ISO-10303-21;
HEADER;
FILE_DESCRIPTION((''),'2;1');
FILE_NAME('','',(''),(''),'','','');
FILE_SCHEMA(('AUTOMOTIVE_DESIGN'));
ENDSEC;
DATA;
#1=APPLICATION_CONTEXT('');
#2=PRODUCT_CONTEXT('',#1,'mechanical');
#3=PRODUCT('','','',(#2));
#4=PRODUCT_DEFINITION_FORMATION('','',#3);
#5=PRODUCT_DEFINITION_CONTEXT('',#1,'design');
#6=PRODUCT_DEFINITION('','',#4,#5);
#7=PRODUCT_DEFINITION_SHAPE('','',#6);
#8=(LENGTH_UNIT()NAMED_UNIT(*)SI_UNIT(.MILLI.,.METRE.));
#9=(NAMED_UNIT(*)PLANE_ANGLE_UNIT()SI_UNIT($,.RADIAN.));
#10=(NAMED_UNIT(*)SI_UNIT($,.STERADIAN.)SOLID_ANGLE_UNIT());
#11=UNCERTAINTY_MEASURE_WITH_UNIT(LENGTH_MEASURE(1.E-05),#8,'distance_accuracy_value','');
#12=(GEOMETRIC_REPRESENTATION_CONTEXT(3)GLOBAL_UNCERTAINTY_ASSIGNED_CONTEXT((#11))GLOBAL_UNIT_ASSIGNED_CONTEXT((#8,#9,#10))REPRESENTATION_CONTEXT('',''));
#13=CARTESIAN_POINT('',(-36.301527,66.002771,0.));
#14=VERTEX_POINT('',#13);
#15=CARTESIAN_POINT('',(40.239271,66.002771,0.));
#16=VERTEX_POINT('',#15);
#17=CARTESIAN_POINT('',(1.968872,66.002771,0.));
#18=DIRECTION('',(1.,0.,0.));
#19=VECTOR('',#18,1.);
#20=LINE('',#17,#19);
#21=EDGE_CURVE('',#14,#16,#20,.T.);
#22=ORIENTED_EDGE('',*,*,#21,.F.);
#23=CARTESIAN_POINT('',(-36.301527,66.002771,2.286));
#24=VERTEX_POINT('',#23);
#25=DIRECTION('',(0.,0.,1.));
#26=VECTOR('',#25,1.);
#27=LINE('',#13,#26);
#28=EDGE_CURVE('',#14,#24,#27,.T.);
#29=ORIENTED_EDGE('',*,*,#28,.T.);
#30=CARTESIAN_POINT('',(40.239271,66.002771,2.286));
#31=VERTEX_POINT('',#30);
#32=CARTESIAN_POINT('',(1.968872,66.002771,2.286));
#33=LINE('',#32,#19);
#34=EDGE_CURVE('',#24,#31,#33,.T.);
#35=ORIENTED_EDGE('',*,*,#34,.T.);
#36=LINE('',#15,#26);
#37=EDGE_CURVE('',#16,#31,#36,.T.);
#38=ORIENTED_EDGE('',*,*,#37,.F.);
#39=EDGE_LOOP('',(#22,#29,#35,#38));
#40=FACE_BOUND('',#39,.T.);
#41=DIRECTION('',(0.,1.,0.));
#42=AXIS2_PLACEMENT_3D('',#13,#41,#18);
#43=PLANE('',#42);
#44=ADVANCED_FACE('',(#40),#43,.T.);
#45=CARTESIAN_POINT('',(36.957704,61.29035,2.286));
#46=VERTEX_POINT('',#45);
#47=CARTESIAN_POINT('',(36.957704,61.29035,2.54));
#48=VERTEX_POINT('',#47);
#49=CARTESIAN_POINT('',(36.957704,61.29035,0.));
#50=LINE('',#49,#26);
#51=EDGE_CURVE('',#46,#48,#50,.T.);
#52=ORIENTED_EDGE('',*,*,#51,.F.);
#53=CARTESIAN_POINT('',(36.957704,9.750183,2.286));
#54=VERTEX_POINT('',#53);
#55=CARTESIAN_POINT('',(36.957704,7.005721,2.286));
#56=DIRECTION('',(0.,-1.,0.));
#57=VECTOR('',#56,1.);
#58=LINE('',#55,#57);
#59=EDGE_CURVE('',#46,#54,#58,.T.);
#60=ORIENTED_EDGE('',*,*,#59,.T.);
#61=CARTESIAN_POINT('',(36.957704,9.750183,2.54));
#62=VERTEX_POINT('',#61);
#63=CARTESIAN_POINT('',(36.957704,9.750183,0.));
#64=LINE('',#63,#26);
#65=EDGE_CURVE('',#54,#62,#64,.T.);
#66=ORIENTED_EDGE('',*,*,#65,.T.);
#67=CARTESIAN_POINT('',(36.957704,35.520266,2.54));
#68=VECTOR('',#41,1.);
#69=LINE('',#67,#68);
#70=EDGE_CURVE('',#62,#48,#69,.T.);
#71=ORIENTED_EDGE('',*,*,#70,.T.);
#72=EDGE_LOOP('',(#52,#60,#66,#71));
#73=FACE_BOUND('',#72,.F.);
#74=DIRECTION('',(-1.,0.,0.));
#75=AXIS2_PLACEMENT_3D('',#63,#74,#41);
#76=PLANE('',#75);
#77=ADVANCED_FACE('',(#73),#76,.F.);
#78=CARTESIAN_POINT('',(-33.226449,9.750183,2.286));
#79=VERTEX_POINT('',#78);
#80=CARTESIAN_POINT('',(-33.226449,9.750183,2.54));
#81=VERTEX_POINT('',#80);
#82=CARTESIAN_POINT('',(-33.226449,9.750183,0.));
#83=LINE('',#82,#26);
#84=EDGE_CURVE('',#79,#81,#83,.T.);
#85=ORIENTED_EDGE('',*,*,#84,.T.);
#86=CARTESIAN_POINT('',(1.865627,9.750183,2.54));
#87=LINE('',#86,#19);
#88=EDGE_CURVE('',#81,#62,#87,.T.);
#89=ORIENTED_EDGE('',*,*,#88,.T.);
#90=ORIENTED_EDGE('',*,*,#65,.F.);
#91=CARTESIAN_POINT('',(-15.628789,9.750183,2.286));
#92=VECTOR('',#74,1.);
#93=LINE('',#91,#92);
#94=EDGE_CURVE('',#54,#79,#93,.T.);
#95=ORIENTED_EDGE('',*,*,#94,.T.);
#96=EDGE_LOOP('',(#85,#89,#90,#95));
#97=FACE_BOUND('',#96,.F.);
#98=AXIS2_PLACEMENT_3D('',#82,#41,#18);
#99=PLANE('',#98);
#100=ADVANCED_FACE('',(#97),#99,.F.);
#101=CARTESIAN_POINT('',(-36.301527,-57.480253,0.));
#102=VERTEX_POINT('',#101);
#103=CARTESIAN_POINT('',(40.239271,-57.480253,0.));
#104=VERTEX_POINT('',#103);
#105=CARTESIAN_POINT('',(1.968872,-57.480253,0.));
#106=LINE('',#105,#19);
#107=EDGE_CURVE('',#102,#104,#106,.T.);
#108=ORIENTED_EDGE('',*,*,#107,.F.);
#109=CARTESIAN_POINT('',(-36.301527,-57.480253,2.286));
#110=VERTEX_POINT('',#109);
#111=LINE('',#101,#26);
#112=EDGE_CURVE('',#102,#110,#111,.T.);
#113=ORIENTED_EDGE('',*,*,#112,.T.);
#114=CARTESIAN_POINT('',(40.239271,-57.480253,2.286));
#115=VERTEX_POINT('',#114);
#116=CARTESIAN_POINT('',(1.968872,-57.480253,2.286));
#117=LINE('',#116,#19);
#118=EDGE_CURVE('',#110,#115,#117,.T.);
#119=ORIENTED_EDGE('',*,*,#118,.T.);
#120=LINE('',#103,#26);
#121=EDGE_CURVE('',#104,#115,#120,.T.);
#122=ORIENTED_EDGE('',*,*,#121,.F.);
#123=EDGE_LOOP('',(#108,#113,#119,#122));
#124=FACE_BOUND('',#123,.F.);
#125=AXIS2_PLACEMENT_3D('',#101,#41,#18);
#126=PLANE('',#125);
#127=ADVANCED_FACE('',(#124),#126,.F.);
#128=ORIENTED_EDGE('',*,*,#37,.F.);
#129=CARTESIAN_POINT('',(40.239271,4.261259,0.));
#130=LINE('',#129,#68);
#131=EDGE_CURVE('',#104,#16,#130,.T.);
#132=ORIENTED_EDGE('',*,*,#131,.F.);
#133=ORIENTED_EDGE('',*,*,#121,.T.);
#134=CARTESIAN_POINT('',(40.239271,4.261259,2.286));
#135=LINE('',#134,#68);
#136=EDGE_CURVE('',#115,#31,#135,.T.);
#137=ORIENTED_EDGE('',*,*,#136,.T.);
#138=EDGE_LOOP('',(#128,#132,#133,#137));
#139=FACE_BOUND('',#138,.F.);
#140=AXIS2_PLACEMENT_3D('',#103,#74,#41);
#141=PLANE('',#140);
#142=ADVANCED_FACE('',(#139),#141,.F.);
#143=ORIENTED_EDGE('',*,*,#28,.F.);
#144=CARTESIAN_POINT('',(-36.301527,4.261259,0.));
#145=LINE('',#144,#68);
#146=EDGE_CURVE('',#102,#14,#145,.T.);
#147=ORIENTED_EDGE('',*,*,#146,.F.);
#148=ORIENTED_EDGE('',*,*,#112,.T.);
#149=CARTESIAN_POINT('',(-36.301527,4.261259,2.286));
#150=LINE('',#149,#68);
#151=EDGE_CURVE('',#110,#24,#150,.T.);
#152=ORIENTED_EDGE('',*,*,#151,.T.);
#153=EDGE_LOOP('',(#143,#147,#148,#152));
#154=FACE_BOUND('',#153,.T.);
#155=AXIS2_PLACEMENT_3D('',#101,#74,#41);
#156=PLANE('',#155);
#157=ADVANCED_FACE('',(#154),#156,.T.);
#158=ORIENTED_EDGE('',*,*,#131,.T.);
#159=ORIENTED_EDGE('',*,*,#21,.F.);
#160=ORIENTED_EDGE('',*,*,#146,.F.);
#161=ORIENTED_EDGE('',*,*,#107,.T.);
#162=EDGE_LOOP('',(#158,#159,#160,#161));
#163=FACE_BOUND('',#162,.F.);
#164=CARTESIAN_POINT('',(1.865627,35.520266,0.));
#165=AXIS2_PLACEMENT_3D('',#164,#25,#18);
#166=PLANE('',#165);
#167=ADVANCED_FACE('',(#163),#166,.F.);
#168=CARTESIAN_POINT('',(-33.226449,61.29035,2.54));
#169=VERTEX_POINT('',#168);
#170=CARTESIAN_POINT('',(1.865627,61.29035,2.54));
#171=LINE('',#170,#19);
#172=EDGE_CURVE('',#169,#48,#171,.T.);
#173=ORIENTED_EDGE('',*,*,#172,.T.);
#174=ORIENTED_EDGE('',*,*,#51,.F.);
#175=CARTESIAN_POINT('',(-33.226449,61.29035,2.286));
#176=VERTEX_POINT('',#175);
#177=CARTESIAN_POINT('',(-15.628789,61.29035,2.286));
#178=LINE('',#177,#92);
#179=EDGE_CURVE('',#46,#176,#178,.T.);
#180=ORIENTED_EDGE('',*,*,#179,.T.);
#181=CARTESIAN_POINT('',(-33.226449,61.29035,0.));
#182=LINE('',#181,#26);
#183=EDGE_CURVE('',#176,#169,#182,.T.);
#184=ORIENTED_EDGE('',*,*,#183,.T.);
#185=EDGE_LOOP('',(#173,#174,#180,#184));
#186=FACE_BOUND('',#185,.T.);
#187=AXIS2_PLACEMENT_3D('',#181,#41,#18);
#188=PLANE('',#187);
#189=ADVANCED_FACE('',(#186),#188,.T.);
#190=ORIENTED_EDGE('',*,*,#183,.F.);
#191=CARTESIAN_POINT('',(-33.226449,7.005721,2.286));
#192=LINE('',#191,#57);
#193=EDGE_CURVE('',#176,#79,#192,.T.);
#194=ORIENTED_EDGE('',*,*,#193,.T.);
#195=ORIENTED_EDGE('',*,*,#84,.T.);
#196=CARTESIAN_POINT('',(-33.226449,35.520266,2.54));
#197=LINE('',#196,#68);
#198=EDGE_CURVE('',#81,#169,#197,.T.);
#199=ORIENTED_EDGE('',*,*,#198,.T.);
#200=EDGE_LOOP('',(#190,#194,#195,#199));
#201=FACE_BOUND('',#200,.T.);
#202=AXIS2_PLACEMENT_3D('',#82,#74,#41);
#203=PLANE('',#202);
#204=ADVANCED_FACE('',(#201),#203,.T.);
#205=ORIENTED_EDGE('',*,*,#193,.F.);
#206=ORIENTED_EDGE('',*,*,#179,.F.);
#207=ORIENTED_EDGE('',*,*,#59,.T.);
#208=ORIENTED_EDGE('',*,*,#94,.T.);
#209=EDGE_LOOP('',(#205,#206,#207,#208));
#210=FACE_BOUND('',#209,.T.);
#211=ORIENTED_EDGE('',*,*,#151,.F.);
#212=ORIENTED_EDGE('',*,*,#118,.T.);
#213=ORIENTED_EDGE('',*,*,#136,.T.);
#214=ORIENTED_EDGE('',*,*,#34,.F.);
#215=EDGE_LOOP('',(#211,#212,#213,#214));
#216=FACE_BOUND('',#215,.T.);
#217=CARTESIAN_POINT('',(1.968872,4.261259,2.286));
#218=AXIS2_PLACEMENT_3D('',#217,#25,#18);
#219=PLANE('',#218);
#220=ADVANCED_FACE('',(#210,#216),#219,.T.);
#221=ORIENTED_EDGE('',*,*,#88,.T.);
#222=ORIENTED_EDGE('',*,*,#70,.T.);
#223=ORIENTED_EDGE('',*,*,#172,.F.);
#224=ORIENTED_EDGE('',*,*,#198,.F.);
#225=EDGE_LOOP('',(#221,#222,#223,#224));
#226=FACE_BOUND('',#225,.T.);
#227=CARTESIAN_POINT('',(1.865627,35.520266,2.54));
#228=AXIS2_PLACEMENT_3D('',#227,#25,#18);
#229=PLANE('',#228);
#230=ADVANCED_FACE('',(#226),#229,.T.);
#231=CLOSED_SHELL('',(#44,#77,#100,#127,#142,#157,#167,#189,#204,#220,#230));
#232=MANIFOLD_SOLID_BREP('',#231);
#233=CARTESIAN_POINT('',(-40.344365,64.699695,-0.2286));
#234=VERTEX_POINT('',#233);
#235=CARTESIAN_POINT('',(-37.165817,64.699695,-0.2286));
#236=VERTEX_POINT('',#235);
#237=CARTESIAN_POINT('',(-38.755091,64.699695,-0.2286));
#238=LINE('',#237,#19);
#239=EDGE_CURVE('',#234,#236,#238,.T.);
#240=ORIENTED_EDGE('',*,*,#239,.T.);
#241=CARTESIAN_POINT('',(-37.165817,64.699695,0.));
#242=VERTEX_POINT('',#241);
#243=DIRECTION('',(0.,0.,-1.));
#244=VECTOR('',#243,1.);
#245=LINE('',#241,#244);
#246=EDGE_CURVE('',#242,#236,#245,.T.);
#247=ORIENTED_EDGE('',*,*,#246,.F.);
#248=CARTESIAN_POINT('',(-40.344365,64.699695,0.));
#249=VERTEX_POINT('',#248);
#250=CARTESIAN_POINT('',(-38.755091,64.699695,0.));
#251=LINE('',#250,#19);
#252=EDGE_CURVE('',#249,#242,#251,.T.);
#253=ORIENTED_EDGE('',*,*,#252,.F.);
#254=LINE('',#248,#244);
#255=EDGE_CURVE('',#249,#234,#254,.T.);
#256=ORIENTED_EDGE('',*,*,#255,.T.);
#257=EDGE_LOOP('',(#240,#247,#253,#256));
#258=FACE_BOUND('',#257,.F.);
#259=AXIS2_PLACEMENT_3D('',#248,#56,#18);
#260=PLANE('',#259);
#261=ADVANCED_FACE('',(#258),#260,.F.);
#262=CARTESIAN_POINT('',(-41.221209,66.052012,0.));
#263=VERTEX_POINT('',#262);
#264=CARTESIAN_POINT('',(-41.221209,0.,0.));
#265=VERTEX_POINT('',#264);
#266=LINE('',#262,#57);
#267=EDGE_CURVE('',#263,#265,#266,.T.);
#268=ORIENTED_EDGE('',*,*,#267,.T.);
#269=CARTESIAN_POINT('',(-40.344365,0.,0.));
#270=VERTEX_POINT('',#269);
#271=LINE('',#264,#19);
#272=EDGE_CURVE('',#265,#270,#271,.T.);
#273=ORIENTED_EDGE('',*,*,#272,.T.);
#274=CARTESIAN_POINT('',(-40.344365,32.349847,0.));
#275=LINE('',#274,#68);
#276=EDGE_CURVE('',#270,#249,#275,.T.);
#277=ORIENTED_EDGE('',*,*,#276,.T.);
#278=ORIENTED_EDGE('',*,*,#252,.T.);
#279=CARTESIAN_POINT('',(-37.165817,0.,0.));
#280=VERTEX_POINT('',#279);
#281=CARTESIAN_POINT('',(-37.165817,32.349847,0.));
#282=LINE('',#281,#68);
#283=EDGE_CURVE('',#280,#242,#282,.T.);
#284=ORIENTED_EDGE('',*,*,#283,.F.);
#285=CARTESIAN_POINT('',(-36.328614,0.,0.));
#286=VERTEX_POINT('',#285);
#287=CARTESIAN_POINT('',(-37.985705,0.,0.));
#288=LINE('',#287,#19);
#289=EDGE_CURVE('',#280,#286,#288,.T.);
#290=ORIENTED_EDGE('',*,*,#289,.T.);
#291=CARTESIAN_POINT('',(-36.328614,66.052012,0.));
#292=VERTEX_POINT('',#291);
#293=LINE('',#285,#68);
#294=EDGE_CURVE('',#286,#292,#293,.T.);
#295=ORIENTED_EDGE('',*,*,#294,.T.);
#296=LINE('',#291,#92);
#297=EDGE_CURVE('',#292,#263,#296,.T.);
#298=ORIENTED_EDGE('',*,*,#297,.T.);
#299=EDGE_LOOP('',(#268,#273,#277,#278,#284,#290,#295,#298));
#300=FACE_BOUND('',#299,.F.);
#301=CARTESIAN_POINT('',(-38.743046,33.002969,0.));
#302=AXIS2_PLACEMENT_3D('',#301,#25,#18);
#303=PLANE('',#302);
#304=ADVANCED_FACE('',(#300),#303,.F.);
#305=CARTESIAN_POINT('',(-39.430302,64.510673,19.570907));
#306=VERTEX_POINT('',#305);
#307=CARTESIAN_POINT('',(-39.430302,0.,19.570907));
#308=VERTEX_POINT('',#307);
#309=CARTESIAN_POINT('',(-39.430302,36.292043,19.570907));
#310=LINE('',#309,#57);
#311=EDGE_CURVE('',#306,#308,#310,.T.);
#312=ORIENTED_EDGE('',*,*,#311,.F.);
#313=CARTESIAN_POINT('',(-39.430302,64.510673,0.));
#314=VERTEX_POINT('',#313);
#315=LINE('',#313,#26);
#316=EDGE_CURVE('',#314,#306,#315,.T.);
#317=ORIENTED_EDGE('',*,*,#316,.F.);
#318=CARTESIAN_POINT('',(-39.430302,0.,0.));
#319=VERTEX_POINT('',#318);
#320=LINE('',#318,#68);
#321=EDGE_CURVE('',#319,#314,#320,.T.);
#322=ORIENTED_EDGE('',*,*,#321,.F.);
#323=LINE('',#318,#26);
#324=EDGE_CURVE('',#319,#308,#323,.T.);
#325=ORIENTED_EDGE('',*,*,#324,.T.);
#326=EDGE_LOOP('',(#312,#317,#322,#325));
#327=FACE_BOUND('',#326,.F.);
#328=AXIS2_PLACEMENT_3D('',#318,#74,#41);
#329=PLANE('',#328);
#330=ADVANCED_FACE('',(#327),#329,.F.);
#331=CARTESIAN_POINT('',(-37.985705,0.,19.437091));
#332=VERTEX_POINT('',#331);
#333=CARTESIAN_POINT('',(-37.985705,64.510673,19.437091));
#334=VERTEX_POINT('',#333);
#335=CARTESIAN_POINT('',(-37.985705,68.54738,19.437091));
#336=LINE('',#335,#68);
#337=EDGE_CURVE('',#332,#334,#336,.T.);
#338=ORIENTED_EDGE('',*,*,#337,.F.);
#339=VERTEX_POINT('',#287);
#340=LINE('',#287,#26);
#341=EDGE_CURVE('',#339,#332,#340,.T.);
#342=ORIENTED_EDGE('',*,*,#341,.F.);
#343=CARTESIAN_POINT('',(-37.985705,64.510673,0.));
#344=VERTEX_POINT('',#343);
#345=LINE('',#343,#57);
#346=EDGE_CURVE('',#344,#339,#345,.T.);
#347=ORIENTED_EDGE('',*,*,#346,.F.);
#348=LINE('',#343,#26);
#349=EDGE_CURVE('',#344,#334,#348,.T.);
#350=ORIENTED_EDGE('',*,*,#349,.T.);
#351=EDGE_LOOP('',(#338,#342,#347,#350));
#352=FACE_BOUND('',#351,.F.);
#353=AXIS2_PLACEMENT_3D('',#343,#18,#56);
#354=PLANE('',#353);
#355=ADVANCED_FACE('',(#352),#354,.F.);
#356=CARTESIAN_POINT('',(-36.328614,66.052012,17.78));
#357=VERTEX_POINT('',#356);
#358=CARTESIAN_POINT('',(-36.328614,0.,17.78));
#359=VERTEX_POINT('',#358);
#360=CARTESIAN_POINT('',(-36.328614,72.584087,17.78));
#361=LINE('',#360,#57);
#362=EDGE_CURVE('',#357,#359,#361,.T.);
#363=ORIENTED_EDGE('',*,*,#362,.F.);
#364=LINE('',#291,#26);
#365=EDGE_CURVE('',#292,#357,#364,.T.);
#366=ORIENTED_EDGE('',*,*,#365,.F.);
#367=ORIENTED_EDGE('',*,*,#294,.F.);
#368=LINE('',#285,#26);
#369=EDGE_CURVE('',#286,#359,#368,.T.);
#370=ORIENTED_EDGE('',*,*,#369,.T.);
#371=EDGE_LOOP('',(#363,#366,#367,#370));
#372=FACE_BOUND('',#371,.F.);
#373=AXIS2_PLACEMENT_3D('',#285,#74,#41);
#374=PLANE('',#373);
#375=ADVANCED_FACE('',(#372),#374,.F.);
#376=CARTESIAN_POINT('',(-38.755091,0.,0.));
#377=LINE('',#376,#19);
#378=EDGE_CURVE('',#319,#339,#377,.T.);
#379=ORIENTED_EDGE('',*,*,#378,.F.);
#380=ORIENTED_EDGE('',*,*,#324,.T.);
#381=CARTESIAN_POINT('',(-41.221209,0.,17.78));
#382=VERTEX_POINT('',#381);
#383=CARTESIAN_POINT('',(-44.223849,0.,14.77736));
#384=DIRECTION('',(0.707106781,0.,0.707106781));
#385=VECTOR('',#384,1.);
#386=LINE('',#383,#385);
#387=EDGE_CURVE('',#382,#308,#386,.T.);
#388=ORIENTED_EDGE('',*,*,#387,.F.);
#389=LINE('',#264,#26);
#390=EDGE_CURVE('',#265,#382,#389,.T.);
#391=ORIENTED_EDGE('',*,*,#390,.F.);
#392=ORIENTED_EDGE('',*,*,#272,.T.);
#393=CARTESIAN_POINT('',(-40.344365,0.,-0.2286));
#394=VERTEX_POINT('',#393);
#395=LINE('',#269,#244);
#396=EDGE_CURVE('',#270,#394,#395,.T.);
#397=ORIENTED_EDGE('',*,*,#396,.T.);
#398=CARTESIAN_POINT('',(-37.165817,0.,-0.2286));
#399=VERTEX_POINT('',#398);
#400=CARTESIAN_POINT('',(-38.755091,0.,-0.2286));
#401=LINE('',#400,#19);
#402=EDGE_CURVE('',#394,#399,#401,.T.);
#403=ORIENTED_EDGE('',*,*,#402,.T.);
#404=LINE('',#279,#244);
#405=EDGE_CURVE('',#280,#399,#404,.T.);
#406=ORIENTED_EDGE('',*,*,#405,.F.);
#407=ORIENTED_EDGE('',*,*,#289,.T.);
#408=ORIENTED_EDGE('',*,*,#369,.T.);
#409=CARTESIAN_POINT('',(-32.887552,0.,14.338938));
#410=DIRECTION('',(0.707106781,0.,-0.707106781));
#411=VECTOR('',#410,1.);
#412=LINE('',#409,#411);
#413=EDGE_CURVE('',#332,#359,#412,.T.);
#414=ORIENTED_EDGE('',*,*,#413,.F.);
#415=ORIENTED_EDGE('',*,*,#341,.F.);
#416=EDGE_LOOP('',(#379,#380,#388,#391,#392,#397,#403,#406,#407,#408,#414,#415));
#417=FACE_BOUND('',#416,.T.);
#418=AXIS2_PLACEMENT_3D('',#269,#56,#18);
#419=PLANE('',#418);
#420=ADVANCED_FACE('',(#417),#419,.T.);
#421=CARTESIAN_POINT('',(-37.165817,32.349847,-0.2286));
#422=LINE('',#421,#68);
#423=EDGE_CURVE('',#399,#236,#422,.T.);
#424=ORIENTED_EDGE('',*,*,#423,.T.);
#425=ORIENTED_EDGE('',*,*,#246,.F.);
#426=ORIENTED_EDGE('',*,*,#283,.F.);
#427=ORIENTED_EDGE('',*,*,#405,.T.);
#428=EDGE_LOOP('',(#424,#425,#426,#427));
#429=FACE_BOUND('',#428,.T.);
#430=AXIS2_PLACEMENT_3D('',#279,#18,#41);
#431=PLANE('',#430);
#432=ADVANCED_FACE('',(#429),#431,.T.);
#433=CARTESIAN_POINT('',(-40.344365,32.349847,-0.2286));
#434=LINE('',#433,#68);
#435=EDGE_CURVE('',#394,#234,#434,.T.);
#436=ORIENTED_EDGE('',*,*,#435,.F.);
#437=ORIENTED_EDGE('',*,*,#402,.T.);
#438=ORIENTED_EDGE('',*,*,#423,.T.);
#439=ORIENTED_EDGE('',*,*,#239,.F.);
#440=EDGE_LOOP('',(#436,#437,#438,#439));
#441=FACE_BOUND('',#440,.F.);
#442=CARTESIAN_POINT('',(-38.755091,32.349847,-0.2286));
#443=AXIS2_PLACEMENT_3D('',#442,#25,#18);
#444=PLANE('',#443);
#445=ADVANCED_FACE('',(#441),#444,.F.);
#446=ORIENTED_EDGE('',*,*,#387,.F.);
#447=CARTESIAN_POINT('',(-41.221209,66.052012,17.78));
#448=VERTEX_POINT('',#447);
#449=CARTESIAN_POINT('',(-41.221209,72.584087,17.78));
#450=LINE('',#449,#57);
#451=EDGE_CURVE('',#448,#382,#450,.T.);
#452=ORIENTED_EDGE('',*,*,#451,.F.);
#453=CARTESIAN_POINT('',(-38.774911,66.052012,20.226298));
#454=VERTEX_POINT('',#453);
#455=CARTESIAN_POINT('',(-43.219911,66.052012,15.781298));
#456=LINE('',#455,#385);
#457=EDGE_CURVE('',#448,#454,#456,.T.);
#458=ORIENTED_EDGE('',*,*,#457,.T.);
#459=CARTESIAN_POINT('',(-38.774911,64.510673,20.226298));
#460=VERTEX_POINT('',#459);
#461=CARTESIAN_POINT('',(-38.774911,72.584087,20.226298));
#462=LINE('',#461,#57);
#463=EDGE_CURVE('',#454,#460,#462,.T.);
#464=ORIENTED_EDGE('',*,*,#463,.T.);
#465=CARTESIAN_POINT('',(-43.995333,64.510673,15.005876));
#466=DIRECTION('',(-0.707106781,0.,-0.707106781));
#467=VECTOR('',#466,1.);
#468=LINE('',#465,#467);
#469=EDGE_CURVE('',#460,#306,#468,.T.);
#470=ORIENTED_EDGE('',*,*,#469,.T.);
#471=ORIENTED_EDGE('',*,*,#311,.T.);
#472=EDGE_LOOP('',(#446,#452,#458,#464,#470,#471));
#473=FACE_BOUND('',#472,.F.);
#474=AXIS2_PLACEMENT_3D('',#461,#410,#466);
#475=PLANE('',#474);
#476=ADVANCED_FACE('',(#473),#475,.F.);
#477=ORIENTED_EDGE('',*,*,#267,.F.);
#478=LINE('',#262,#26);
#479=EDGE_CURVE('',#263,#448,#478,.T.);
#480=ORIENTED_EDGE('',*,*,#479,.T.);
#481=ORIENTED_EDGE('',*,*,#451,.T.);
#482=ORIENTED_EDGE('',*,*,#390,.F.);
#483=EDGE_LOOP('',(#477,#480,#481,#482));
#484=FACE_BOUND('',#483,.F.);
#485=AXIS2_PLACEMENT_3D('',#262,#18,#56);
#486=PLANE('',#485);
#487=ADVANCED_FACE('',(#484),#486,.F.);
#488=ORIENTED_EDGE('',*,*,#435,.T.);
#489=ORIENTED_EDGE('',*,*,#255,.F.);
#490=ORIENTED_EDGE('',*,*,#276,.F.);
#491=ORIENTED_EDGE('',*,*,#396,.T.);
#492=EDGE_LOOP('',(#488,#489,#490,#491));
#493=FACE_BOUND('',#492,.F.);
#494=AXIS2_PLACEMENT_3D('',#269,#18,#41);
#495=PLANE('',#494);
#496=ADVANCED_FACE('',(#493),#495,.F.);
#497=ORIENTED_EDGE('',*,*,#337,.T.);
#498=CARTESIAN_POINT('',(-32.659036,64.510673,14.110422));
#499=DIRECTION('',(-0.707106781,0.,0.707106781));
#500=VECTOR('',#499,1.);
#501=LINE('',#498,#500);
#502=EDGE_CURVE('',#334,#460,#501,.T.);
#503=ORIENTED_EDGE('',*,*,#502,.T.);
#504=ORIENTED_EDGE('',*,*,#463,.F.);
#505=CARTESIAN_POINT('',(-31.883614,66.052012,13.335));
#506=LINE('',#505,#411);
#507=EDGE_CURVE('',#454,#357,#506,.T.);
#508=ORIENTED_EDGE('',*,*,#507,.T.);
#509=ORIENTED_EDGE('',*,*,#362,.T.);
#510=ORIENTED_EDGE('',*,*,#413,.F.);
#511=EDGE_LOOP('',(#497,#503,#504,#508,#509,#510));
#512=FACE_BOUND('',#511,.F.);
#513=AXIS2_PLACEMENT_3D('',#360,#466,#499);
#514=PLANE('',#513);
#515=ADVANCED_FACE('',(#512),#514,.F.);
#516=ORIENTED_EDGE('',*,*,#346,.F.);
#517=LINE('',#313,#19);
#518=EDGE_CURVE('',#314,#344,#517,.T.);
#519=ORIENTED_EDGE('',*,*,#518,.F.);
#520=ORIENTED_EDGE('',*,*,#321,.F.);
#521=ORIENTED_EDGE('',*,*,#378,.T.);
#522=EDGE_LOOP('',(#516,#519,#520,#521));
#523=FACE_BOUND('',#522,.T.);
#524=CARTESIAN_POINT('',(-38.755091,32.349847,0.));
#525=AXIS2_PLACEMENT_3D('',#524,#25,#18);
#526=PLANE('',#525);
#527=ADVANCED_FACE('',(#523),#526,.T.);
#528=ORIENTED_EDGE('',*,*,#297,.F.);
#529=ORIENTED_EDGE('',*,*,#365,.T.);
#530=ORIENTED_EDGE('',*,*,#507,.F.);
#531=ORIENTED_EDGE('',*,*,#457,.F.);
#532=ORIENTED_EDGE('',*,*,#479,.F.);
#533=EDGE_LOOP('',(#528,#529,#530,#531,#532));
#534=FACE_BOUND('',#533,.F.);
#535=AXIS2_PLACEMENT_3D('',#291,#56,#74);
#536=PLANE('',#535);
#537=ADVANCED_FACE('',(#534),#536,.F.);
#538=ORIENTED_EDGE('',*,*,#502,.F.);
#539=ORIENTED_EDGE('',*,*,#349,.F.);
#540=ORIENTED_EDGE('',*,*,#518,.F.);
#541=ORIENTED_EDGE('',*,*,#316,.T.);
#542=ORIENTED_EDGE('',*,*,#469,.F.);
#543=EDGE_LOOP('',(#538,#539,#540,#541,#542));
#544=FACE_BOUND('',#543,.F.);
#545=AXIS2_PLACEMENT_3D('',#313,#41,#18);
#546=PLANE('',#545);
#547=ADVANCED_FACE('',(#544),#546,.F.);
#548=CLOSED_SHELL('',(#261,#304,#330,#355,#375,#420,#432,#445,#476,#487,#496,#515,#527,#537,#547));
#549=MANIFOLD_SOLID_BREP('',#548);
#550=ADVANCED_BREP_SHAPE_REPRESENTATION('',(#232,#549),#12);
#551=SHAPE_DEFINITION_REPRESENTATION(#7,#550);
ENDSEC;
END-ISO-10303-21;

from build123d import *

# Parameters (mm, degrees)
F0_W        = 76.5407979488
F0_H        = 123.4830245376
F1_DEPTH    = 2.286
F3_DEPTH    = 20.32
F4_W        = 70.1841525733
F4_H        = 51.5401670709
F5_DEPTH    = 2.54
F6_W        = 3.1785480678
F6_H        = 64.6996945143
F7_DEPTH    = 0.2286
F8_T1_DEPTH = 79.1161617244


# Not quite as in the source:
# - a fillet or chamfer that OpenCascade refuses, or shapes differently, is made with other operations: its cross-section is extruded or revolved along the edge and cut away or added


with BuildPart() as f1:
    # F0 (on Top) → F1 (new body)
    with BuildSketch(Plane.XY):
        with Locations((1.9688718021, 4.2612589896)):
            Rectangle(F0_W, F0_H)
    extrude(amount=F1_DEPTH)

    # F4 (on Top) → F5 (join)
    with BuildSketch(Plane.XY):
        with Locations((1.8656272441, 35.5202662759)):
            Rectangle(F4_W, F4_H)
    extrude(amount=F5_DEPTH)


with BuildPart() as f3:
    # F2 (on Top) → F3 (new body)
    with BuildSketch(Plane.XY):
        Polygon((-36.3286137581, 0), (-36.3286137581, 66.0520121455), (-41.2212088704, 66.0520121455), (-41.2212088704, 0), (-39.4303016365, 0), (-39.4303016365, 64.5106732845), (-37.9857048392, 64.5106732845), (-37.9857048392, 0), align=None)
    extrude(amount=F3_DEPTH)

    # F6 (on Top) → F7 (join)
    with BuildSketch(Plane.XY):
        with Locations((-38.7550909072, 32.3498472571)):
            Rectangle(F6_W, F6_H)
    extrude(amount=-F7_DEPTH)

    # F8: chamfer of 2.54 on 2 edges, made by hand

    # F8_s2 → F8_t1 (cut)
    with BuildSketch(Plane.XZ.offset(-72.584086935)):
        Polygon((-36.3286137581, 17.78), (-38.8686137581, 20.32), (-36.3286137581, 20.32), align=None)
        Polygon((-38.6812088704, 20.32), (-41.2212088704, 17.78), (-41.2212088704, 20.32), align=None)
    extrude(amount=F8_T1_DEPTH, mode=Mode.SUBTRACT)


solid = Compound([f1.part, f3.part])
